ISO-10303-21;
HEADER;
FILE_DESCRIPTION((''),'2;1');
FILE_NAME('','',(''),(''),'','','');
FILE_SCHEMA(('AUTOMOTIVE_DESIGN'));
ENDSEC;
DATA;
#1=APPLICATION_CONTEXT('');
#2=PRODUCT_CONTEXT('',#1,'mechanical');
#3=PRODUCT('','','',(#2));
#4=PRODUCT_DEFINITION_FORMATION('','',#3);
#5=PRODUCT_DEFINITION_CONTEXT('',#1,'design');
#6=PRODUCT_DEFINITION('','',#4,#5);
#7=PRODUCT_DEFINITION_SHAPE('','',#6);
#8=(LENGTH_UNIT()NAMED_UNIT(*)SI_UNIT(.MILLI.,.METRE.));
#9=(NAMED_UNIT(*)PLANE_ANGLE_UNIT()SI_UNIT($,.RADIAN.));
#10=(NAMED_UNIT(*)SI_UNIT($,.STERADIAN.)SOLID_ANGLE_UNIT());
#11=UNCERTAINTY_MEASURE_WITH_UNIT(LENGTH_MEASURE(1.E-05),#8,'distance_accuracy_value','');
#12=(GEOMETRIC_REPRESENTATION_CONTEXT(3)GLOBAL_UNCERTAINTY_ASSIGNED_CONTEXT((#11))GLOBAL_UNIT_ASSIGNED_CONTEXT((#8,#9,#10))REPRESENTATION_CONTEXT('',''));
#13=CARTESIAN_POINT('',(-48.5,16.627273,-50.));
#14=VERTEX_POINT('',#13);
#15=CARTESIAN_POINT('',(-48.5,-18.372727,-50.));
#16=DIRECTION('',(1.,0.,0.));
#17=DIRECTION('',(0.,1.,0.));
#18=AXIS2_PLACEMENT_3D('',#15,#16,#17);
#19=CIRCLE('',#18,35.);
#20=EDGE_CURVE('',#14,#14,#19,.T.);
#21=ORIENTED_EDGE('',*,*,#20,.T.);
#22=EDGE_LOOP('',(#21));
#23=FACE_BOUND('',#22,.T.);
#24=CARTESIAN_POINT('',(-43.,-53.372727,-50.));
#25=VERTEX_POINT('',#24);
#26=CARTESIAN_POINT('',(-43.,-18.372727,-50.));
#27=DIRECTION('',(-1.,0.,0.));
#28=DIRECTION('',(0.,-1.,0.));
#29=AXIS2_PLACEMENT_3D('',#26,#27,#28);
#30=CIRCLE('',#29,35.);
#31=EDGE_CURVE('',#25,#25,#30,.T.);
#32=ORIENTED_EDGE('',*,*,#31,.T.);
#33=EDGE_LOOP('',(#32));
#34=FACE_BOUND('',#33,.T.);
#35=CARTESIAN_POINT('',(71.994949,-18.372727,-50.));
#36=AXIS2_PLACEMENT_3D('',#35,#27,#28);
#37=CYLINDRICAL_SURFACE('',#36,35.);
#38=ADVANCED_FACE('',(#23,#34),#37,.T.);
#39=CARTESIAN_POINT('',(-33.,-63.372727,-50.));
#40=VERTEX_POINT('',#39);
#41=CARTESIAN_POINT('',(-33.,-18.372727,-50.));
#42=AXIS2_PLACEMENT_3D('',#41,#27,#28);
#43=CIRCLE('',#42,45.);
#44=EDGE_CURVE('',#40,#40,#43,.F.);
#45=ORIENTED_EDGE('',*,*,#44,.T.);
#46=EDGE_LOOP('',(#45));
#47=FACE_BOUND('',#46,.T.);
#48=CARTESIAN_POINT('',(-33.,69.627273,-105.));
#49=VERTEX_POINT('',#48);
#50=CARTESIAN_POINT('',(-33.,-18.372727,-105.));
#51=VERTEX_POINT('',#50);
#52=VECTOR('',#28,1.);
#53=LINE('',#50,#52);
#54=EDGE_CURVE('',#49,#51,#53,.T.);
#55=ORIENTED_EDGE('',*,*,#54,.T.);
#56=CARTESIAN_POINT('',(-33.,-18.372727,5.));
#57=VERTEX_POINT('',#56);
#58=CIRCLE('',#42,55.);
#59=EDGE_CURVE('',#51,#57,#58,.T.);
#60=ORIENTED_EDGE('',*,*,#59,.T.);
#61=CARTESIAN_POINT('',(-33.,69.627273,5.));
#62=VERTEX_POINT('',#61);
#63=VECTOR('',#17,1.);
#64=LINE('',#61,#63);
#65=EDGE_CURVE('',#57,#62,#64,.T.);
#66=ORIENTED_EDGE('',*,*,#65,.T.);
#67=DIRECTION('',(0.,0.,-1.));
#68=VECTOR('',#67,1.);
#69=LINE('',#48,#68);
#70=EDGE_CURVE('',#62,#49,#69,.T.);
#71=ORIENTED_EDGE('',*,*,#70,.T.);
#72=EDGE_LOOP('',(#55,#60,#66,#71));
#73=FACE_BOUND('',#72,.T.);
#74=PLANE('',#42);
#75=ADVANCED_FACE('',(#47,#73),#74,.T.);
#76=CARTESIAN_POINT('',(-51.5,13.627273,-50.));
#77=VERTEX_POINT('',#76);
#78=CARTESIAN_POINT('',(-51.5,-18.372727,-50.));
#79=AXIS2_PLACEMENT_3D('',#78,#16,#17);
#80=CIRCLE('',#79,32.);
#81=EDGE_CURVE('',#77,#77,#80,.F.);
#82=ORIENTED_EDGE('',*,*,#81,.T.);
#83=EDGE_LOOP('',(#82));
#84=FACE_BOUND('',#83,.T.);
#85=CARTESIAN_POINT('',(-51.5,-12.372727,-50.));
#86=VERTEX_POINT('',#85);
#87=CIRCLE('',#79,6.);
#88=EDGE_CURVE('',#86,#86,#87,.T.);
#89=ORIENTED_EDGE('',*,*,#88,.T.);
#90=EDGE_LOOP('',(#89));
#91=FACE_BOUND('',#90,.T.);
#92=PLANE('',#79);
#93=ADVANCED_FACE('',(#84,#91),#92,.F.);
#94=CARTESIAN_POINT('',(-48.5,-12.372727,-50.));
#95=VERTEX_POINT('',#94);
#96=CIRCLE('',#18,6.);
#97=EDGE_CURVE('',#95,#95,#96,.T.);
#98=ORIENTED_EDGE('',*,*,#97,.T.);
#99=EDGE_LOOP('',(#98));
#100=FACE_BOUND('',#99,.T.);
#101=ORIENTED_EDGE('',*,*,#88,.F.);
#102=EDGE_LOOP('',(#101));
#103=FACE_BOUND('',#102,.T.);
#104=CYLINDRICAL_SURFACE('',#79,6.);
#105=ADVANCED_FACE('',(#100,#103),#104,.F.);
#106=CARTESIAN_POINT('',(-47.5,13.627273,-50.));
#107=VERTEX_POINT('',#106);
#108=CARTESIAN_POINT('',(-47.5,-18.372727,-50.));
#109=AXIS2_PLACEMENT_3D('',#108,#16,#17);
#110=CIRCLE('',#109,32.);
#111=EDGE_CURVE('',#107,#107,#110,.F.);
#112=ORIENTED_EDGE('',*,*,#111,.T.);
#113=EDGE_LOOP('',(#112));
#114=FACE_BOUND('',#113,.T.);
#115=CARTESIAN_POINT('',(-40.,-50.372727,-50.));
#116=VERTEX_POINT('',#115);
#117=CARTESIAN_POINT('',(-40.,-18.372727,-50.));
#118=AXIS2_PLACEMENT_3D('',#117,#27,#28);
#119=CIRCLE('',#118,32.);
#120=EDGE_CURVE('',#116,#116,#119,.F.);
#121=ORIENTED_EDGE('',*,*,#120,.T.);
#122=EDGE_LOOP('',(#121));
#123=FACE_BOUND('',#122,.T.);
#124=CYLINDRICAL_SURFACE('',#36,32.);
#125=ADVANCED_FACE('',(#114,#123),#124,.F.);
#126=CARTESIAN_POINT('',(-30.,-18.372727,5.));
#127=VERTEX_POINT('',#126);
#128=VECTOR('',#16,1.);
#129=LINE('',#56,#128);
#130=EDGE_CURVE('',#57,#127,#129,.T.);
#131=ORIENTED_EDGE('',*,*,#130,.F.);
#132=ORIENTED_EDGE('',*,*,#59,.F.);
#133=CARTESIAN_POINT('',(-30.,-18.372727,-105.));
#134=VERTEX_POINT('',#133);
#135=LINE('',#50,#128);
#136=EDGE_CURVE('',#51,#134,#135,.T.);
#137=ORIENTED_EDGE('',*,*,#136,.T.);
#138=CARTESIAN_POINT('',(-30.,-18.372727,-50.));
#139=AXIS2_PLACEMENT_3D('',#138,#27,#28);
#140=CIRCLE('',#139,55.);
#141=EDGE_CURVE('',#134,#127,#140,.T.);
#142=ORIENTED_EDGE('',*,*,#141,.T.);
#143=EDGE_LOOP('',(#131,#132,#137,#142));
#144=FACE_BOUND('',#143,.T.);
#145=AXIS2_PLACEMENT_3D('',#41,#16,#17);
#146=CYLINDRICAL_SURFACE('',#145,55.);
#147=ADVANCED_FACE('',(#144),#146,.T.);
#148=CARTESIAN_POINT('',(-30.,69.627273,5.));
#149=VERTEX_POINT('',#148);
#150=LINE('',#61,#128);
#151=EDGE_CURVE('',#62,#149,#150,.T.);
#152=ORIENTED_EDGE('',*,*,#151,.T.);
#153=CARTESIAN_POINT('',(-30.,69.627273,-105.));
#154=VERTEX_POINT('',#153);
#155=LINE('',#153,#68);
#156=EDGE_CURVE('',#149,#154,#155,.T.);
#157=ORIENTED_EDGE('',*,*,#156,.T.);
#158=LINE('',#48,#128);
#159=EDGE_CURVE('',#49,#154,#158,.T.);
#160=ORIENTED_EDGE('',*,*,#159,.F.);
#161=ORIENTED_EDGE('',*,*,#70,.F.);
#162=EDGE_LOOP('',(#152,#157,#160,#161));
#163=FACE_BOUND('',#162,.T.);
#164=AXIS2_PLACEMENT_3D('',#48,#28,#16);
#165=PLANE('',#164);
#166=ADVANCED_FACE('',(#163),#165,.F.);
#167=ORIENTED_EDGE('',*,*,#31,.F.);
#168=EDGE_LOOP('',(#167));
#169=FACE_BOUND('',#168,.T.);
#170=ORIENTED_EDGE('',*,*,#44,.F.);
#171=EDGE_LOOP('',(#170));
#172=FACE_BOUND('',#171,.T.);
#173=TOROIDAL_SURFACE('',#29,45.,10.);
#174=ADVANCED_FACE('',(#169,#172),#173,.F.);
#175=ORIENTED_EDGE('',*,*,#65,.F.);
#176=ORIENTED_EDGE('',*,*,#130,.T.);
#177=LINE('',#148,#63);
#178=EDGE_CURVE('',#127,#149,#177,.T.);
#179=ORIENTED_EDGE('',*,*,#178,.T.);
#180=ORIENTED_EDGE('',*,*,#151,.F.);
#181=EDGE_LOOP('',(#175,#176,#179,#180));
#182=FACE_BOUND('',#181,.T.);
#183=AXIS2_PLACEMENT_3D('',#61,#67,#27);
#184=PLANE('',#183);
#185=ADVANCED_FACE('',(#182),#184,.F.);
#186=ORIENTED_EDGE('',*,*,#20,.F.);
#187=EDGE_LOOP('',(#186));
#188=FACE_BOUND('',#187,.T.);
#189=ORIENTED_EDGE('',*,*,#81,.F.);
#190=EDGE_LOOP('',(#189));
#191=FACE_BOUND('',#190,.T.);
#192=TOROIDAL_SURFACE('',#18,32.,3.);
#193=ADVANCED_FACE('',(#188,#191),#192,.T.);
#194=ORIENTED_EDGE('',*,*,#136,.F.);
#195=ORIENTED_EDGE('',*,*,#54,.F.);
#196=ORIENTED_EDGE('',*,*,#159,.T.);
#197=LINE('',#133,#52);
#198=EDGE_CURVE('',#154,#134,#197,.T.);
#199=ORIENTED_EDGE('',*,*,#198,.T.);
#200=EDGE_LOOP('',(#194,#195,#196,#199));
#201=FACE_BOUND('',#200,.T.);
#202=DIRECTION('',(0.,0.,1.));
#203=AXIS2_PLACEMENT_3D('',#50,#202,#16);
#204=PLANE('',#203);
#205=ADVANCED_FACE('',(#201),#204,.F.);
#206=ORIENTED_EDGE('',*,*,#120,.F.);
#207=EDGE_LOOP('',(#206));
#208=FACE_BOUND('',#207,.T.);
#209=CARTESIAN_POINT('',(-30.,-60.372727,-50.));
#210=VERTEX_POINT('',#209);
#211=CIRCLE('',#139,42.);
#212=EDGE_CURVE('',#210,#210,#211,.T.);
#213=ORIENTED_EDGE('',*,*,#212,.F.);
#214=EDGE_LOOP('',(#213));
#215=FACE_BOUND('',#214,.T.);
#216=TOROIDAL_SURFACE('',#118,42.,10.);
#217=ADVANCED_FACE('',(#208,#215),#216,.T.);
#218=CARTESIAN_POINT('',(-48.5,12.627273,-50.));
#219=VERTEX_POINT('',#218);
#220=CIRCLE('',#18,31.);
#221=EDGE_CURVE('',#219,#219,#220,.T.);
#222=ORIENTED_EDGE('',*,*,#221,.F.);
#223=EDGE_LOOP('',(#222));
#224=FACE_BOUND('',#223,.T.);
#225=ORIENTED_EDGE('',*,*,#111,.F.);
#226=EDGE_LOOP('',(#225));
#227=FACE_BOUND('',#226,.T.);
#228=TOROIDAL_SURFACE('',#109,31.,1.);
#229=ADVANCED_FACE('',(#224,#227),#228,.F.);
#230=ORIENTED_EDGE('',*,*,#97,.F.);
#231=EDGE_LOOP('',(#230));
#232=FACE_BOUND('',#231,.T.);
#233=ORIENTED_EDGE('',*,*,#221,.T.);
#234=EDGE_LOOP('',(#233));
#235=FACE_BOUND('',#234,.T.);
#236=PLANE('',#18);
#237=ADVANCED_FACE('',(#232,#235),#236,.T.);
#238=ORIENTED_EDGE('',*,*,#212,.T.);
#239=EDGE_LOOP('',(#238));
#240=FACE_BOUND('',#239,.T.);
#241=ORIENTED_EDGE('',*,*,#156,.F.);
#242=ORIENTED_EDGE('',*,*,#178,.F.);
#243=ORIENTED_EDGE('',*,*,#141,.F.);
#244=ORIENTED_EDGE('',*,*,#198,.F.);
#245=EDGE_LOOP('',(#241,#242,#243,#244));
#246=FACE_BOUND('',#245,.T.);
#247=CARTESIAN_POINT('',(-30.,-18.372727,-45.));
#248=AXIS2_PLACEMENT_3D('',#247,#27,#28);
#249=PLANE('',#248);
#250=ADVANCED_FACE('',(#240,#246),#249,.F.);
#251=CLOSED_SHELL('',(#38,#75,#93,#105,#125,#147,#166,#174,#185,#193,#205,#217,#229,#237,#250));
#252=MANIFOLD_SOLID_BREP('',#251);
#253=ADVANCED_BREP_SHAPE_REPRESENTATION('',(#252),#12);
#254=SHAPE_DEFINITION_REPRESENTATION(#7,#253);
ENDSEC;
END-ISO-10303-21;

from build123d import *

# Parameters (mm, degrees)
MOTOR_RING_DEPTH      = 12.5
MOTOR_RING_DEPTH_BACK = 6
SKETCH1_R             = 35
SKETCH1_R_2           = 32
SKETCH3_R             = 35
SKETCH3_R_2           = 6
MOTOR_CAP_DEPTH       = 3
BULK_START            = 3
SKETCH2_R             = 32
BULK_EXTRUDE_DEPTH    = 3
FILLET2_R             = 10
FILLET3_R             = 10
FILLET4_R             = 3
FILLET5_R             = 1


with BuildPart() as part:
    # Sketch1 → MOTOR RING (new, two sides: drawn at the far end of the back side and taken through both)
    with BuildSketch(Plane(origin=(-42.5, 0, 0), x_dir=(0, 0, -1), z_dir=(1, 0, 0)).offset(-MOTOR_RING_DEPTH_BACK)):
        with Locations(Location((50, -18.372727273, 0), (0, 0, 270))):
            Circle(SKETCH1_R)
        with Locations(Location((50, -18.372727273, 0), (0, 0, 270))):
            Circle(SKETCH1_R_2, mode=Mode.SUBTRACT)
    extrude(amount=MOTOR_RING_DEPTH + MOTOR_RING_DEPTH_BACK)

    # Sketch3 → MOTOR CAP (add)
    with BuildSketch(Plane(origin=(-48.5, 0, 0), x_dir=(0, 0, -1), z_dir=(1, 0, 0))):
        with Locations(Location((50, -18.372727273, 0), (0, 0, 270))):
            Circle(SKETCH3_R)
        with Locations(Location((50, -18.372727273, 0), (0, 0, 90))):
            Circle(SKETCH3_R_2, mode=Mode.SUBTRACT)
    extrude(amount=-MOTOR_CAP_DEPTH)

    # Sketch2 → BULK EXTRUDE (add)
    with BuildSketch(Plane.ZY.offset(27).offset(BULK_START)):
        with BuildLine():
            Line((-105, -18.372727273), (-105, 69.627272727))
            Line((-105, 69.627272727), (5, 69.627272727))
            Line((5, 69.627272727), (5, -18.372727273))
            ThreePointArc((5, -18.372727273), (-50, -73.372727273), (-105, -18.372727273))
        make_face()
        with Locations(Location((-50, -18.372727273, 0), (0, 0, 270))):
            Circle(SKETCH2_R, mode=Mode.SUBTRACT)
    extrude(amount=BULK_EXTRUDE_DEPTH)

    # Fillet2
    # the kernel refuses this fillet: 10 mm, written as the material it adds along each edge
    with BuildSketch(Plane(origin=(-33, -18.372727273, -50), x_dir=(0, -1, 0), z_dir=(0, 0, -1))) as fillet2_piece_1:
        with BuildLine():
            CenterArc((35 + FILLET2_R, FILLET2_R), FILLET2_R, 180, 90)
            Line((35 + FILLET2_R, 0), (35, 0))
            Line((35, 0), (35, FILLET2_R))
        make_face()
    revolve(axis=Axis((-33, -18.372727273, -50), (-1, 0, 0)))

    # Fillet3
    fillet3_edges = [part.edges().sort_by_distance(p)[0] for p in [
        (-30, 13.627272727, -50),
    ]]
    fillet(fillet3_edges, radius=FILLET3_R)

    # Fillet4
    fillet4_edges = [part.edges().sort_by_distance(p)[0] for p in [
        (-51.5, 16.627272727, -50),
    ]]
    fillet(fillet4_edges, radius=FILLET4_R)

    # Fillet5
    fillet5_edges = [part.edges().sort_by_distance(p)[0] for p in [
        (-48.5, 13.627272727, -50),
    ]]
    fillet(fillet5_edges, radius=FILLET5_R)


solid = part.part
